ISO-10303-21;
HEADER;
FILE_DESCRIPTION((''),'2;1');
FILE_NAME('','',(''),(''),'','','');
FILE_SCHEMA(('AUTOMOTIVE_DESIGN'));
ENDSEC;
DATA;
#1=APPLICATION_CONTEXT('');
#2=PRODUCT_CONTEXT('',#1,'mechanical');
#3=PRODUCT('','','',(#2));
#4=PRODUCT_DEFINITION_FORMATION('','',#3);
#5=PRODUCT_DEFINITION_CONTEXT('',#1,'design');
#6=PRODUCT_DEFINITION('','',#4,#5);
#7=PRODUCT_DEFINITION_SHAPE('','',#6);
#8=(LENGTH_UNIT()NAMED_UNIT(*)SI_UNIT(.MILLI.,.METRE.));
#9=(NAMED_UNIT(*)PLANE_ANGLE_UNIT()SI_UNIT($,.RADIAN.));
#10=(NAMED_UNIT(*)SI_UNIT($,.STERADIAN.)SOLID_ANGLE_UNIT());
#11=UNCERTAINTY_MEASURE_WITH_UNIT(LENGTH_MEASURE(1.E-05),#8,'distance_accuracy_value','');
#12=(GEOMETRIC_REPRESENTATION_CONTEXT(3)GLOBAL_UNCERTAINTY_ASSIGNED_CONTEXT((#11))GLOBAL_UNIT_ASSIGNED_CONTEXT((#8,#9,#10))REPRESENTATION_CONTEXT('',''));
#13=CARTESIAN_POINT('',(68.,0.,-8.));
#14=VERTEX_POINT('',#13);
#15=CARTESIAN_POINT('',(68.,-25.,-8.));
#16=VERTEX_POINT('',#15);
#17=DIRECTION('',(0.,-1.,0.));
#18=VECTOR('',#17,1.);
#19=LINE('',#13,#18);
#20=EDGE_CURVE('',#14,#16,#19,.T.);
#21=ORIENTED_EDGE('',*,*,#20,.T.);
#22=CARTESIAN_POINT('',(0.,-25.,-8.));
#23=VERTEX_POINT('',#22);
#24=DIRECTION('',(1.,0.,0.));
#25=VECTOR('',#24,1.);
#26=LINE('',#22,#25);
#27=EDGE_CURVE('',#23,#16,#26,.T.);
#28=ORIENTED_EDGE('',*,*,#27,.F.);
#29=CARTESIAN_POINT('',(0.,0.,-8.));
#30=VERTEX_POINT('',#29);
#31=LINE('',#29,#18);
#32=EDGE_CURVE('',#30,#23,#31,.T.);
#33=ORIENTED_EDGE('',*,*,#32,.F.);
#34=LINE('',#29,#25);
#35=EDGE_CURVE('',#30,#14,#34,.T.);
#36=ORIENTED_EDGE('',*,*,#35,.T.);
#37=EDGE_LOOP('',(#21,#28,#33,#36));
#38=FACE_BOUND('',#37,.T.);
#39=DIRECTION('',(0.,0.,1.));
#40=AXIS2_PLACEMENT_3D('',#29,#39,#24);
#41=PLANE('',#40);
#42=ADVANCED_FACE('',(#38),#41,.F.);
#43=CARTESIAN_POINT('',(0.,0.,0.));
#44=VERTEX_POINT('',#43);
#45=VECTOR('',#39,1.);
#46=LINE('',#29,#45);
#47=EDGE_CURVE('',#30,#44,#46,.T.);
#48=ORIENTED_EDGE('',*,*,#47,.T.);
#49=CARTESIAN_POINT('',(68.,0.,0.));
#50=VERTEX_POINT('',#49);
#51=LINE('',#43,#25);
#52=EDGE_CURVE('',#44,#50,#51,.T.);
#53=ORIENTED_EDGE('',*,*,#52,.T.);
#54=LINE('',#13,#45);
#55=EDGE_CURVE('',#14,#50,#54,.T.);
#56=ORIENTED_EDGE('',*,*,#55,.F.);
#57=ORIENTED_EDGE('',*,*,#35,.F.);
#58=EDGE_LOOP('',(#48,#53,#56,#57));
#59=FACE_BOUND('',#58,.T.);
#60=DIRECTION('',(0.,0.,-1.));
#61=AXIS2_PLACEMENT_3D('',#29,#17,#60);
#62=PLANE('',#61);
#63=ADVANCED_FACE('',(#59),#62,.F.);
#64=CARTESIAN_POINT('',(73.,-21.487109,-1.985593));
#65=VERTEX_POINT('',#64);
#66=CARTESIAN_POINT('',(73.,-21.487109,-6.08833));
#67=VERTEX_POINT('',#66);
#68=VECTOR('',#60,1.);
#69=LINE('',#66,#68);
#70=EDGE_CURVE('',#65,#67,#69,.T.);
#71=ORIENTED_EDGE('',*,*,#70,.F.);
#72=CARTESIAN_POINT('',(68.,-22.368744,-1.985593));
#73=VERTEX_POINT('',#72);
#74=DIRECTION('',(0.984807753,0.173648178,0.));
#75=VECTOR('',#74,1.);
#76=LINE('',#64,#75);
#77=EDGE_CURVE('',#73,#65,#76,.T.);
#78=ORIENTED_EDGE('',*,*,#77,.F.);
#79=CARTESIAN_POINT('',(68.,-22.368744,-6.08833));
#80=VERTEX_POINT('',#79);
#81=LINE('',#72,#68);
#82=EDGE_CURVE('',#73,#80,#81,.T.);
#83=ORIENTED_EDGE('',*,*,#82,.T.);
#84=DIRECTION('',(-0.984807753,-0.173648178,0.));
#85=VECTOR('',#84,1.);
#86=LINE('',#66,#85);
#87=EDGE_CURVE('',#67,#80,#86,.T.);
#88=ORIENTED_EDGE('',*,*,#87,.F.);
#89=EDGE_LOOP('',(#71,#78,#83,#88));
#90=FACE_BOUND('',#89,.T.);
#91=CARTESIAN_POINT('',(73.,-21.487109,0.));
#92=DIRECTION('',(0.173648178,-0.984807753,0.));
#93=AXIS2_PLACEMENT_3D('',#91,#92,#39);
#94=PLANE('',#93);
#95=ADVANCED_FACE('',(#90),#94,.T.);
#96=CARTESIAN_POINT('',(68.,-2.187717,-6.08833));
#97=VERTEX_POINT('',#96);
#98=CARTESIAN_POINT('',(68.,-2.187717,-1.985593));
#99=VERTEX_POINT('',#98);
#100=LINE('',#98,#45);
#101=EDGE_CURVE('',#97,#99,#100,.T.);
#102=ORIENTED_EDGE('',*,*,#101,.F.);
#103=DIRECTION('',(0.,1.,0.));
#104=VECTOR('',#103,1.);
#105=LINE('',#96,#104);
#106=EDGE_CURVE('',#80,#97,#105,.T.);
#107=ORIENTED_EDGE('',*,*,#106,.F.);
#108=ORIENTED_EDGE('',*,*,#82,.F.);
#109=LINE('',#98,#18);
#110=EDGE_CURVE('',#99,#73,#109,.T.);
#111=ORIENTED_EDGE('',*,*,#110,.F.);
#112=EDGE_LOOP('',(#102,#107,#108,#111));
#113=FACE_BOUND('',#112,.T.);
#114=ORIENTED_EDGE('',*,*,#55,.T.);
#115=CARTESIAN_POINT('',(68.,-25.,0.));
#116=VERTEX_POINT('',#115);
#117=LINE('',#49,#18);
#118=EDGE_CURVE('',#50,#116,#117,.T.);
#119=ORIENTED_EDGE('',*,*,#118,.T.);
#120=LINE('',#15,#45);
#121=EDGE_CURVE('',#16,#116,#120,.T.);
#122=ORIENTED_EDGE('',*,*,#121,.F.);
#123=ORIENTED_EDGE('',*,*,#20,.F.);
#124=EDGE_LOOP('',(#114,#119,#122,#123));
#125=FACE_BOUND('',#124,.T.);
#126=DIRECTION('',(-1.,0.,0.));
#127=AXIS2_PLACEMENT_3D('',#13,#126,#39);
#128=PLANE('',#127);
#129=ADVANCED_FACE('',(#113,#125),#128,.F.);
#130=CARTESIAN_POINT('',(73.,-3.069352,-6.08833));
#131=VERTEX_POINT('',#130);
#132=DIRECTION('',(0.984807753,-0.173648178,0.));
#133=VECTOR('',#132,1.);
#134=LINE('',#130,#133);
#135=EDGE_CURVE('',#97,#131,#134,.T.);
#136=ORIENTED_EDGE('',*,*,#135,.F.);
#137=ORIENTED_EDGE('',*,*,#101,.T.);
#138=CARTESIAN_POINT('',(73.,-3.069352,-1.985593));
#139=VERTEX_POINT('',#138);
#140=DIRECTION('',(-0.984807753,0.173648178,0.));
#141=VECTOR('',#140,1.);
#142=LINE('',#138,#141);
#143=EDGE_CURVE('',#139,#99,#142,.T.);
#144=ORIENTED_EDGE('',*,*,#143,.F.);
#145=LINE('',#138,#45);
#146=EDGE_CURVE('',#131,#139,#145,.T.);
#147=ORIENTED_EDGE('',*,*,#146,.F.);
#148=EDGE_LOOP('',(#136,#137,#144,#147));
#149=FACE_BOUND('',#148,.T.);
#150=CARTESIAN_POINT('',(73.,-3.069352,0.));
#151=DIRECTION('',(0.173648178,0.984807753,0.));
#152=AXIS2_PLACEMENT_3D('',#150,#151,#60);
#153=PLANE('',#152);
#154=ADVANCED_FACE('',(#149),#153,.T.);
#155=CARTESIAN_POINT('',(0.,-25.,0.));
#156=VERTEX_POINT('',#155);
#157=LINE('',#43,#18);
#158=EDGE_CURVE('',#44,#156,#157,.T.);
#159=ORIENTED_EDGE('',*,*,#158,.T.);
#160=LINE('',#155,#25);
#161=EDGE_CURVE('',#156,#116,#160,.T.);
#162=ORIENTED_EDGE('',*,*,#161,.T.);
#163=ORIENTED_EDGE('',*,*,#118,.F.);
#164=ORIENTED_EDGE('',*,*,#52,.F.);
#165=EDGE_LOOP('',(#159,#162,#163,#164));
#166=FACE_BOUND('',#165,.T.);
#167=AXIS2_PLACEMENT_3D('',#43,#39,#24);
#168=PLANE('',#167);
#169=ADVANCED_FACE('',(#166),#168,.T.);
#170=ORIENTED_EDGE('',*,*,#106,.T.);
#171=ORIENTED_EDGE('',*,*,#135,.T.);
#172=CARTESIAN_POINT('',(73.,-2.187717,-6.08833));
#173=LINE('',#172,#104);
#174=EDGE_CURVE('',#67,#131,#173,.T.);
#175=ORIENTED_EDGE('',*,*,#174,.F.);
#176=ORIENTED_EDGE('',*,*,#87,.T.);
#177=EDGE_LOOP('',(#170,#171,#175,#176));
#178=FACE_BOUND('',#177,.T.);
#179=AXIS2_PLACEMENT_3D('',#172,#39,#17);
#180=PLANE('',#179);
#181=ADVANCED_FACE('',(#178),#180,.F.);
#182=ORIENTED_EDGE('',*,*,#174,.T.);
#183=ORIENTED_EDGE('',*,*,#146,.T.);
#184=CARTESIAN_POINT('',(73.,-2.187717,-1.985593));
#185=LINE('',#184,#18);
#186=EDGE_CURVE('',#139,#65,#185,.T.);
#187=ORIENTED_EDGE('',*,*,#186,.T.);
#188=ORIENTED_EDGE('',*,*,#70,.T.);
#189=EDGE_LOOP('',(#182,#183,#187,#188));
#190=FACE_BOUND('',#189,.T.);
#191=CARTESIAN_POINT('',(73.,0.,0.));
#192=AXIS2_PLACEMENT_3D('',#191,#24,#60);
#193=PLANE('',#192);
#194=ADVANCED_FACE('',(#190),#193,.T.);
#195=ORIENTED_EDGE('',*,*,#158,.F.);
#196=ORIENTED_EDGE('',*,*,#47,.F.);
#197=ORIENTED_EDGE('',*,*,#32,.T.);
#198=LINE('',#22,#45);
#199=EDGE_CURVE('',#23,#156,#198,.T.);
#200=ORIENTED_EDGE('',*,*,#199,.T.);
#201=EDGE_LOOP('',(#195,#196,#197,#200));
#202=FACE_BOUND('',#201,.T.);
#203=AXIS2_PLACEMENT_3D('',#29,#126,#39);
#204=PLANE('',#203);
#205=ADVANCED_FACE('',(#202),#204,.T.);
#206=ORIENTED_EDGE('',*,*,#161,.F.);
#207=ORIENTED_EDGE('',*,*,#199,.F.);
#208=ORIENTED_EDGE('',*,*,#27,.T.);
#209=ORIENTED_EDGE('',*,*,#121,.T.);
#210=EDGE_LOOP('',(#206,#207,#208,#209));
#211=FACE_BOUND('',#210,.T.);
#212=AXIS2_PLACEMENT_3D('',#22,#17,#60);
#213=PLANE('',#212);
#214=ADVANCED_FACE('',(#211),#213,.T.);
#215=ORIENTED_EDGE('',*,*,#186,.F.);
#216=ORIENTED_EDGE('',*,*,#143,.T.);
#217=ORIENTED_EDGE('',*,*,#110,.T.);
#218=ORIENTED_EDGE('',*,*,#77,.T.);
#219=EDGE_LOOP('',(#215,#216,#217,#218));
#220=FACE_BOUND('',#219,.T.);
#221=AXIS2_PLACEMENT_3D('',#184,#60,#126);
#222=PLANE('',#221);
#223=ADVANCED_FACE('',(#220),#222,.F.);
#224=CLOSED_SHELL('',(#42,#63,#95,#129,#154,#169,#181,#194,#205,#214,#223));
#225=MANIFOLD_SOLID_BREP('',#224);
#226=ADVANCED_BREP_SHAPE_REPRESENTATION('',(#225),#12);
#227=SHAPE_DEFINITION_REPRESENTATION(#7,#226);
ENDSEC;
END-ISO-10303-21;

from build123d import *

# Parameters (mm, degrees)
SKETCH1_W           = 68
SKETCH1_H           = 25
BOSS_EXTRUDE1_DEPTH = 8
SKETCH13_W          = 4.102736362
SKETCH13_H          = 20.181027508
BOSS_EXTRUDE5_DEPTH = 5
CHAMFER1_SIZE2      = 0.881634904
CHAMFER1_SIZE       = 5
CHAMFER2_SIZE2      = 5
CHAMFER2_SIZE       = 0.881634904


with BuildPart() as part:
    # Sketch1 → Boss-Extrude1 (new body)
    with BuildSketch(Plane(origin=(0, 0, 0), x_dir=(1, 0, 0), z_dir=(0, 0, -1))):
        with Locations((34, 12.5)):
            Rectangle(SKETCH1_W, SKETCH1_H)
    extrude(amount=BOSS_EXTRUDE1_DEPTH)

    # Sketch13 → Boss-Extrude5 (add)
    with BuildSketch(Plane(origin=(68, 0, 0), x_dir=(0, 0, -1), z_dir=(1, 0, 0))):
        with Locations((4.036961589, -12.278230467)):
            Rectangle(SKETCH13_W, SKETCH13_H)
    extrude(amount=BOSS_EXTRUDE5_DEPTH)

    # Chamfer1
    chamfer1_edges = [part.edges().sort_by_distance(p)[0] for p in [
        (73, -2.187716713, -4.036961589),
    ]]
    chamfer1_side = [part.faces().sort_by_distance(p)[0] for p in [
        (72.982367302, -2.187716713, -4.036961589),
    ]]
    chamfer(chamfer1_edges, length=CHAMFER1_SIZE - 0.0001, length2=CHAMFER1_SIZE2 - 0.0001, reference=chamfer1_side[0])  # a hair under: the kernel refuses the full size

    # Chamfer2
    chamfer2_edges = [part.edges().sort_by_distance(p)[0] for p in [
        (73, -22.368744221, -4.036961589),
    ]]
    chamfer2_side = [part.faces().sort_by_distance(p)[0] for p in [
        (73, -22.351111523, -4.036961589),
    ]]
    chamfer(chamfer2_edges, length=CHAMFER2_SIZE - 0.0001, length2=CHAMFER2_SIZE2 - 0.0001, reference=chamfer2_side[0])  # a hair under: the kernel refuses the full size


solid = part.part
